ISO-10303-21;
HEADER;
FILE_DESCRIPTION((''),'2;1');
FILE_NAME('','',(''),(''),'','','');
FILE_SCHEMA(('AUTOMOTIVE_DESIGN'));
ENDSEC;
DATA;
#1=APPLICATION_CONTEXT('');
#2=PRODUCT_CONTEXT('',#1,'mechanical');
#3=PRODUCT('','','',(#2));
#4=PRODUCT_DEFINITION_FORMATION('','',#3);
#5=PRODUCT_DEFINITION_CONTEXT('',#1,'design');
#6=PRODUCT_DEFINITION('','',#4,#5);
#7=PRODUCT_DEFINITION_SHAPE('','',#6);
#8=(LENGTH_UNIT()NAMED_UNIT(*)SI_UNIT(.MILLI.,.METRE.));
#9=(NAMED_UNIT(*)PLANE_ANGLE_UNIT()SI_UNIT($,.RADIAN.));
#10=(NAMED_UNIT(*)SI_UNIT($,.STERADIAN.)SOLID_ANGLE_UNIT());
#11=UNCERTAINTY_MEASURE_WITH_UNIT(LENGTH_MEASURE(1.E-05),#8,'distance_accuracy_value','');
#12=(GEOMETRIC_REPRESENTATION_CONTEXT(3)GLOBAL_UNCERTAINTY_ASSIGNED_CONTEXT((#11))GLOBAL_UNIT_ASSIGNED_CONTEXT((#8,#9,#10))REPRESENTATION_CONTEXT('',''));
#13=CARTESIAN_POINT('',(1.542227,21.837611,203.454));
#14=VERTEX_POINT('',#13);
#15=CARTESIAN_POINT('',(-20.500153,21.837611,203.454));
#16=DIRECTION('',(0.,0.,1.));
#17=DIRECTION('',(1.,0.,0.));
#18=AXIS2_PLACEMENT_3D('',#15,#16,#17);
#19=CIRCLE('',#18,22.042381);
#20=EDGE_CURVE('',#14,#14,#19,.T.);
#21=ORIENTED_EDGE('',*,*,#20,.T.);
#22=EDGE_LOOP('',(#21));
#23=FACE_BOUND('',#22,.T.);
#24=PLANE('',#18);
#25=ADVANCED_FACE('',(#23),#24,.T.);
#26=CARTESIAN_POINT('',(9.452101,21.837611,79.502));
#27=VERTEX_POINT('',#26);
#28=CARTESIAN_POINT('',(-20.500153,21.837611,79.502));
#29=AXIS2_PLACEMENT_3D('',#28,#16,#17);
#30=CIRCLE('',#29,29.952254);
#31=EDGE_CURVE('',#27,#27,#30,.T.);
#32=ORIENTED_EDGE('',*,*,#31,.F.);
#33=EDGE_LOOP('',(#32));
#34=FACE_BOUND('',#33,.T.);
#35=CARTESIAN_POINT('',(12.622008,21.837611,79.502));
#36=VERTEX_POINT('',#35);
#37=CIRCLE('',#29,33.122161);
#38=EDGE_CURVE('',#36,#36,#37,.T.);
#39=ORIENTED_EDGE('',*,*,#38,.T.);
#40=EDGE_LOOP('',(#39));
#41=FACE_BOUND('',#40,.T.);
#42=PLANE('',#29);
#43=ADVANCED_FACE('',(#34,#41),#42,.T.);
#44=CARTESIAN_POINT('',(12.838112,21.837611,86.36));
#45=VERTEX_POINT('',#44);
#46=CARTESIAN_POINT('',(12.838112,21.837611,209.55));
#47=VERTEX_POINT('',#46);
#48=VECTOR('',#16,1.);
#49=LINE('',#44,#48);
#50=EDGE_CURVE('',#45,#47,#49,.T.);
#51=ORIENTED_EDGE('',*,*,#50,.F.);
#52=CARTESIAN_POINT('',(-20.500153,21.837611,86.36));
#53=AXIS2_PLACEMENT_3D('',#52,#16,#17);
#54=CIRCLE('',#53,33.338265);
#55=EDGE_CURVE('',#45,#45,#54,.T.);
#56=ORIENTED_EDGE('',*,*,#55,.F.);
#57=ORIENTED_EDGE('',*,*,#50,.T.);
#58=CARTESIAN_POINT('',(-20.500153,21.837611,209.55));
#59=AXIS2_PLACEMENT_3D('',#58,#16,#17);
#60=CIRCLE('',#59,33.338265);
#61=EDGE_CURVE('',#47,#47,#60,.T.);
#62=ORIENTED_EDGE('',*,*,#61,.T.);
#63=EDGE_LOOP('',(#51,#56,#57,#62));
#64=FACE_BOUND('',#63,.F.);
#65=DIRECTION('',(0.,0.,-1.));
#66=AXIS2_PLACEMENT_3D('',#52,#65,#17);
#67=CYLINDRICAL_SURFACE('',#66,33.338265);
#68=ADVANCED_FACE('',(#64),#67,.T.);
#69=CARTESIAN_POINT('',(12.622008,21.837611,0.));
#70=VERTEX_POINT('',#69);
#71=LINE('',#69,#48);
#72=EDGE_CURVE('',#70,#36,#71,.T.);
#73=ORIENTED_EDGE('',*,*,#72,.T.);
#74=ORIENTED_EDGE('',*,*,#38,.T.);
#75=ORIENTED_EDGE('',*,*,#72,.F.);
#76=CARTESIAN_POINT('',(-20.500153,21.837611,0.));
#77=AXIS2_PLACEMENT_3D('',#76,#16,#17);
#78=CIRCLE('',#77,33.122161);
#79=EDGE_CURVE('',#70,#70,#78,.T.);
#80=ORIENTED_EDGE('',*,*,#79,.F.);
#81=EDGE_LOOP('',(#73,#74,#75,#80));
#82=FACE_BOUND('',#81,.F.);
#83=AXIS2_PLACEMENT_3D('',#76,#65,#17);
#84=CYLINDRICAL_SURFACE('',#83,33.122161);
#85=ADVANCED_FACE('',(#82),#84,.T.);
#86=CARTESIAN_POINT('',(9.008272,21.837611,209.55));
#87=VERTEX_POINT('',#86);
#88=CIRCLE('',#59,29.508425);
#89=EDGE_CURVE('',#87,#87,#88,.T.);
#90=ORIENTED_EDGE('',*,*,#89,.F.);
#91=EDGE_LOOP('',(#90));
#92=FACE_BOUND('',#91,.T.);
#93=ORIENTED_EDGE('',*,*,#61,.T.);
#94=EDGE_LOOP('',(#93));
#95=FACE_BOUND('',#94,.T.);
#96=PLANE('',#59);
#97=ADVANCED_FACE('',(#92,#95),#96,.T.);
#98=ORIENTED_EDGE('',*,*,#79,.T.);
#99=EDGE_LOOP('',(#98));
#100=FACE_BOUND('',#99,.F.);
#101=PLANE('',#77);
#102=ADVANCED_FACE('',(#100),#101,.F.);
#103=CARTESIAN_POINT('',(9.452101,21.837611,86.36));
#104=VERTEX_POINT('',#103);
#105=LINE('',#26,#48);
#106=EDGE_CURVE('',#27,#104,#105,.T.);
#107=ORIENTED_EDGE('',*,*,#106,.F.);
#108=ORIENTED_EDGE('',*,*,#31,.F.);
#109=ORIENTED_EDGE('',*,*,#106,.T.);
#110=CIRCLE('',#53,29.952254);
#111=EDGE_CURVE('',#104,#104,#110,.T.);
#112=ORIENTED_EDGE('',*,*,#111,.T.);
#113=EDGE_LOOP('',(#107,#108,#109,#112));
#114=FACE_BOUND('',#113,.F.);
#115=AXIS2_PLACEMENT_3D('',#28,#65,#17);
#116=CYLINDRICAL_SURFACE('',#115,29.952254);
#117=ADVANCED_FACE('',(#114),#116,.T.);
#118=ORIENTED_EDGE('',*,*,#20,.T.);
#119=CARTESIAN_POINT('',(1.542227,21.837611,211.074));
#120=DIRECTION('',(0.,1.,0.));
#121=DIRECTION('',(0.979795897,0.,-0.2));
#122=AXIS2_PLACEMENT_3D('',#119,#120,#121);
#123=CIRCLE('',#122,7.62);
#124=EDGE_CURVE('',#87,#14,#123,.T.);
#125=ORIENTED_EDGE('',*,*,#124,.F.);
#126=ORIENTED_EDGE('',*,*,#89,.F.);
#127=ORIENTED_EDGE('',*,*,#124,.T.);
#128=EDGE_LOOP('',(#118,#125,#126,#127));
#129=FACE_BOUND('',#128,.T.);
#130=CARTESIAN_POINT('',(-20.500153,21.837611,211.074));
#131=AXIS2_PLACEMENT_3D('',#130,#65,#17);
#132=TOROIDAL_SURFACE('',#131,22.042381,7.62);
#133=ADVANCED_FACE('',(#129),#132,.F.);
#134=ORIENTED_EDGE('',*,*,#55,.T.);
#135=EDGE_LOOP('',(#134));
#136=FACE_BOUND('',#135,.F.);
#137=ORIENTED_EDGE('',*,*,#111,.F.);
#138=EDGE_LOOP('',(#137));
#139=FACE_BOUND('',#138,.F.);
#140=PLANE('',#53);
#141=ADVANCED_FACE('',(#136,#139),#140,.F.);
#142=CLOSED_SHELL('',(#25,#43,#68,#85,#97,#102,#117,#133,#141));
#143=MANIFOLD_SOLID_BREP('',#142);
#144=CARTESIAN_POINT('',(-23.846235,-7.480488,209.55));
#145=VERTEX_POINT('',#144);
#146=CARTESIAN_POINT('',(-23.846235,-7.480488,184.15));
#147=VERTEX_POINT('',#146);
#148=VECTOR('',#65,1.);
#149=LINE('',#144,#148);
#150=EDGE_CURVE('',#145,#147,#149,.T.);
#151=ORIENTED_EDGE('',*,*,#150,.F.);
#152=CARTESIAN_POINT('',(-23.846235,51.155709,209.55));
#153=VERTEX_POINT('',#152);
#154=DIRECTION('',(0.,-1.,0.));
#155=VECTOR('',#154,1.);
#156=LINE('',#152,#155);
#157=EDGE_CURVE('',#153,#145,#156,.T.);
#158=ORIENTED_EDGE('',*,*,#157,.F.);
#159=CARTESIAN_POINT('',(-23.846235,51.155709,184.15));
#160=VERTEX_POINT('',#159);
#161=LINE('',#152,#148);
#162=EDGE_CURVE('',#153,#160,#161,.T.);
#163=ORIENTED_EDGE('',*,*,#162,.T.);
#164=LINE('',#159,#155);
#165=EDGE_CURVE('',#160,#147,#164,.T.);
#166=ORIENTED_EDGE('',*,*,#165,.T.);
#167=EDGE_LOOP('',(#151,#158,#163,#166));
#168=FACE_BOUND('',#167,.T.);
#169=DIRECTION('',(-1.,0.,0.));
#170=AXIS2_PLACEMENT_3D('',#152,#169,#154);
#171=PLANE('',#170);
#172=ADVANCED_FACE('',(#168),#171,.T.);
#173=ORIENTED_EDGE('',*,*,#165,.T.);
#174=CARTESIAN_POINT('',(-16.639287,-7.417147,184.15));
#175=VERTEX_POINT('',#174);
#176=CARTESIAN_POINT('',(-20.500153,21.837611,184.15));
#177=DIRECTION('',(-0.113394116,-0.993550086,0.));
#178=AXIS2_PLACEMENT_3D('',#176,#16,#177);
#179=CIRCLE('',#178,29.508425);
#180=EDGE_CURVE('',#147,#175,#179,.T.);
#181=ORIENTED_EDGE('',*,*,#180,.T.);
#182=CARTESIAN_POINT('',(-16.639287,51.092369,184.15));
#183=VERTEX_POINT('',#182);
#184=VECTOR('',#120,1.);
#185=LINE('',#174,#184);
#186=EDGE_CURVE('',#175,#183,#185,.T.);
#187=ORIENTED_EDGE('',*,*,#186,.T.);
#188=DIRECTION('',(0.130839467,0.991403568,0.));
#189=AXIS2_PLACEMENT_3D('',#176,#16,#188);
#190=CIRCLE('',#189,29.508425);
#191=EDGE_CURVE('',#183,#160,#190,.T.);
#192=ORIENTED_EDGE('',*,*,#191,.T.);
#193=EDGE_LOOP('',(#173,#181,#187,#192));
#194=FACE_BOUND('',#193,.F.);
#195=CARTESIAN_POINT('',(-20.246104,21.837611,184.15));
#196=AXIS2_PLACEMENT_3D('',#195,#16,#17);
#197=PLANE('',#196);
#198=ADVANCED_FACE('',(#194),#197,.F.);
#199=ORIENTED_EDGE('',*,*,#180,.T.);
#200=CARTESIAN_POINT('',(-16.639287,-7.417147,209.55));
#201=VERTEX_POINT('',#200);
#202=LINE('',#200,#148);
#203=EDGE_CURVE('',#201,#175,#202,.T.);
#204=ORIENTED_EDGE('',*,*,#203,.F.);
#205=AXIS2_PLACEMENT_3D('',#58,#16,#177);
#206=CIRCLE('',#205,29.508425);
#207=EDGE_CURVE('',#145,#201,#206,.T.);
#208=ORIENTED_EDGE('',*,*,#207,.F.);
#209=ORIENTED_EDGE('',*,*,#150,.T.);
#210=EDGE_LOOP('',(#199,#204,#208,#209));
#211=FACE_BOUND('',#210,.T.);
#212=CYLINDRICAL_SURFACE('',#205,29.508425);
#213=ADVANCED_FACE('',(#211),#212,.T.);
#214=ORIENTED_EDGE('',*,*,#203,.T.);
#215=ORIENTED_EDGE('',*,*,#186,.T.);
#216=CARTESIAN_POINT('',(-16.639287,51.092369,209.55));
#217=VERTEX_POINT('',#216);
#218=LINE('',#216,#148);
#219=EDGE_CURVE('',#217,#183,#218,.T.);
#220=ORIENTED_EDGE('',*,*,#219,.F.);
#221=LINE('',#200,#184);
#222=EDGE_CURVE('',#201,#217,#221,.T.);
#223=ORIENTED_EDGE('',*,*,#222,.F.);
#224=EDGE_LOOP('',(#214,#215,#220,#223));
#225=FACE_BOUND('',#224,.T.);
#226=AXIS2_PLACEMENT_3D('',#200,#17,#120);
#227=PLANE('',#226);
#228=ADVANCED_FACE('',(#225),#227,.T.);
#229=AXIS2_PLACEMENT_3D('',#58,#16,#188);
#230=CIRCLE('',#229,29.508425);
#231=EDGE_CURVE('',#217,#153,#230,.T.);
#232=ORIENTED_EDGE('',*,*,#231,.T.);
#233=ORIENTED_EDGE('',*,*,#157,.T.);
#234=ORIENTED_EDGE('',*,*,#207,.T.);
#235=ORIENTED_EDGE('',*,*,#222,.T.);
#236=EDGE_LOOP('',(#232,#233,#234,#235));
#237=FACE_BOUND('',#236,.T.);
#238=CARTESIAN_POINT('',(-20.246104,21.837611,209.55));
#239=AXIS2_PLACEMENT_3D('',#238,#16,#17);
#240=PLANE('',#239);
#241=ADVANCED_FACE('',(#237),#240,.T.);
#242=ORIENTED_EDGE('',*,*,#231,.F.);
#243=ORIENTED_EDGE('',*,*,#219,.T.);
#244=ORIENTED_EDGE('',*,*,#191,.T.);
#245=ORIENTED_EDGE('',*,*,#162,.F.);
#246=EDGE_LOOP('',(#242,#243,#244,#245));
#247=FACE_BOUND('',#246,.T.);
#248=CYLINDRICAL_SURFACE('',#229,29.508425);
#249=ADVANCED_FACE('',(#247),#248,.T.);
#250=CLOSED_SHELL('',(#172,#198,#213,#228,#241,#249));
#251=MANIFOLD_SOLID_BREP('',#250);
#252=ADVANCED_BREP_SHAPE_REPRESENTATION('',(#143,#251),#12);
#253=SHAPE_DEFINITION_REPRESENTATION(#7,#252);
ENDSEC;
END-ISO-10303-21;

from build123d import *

# Parameters (mm, degrees)
F0_R      = 33.1221613945
F1_DEPTH  = 79.502
F2_R      = 29.9522541519
F3_DEPTH  = 6.858
F4_R      = 33.3382653076
F4_R_2    = 29.9522541519
F5_DEPTH  = 123.19
F6_R      = 29.5084253816
F7_DEPTH  = 6.096
F10_DEPTH = 25.4


# Not quite as in the source:
# - a fillet or chamfer that OpenCascade refuses, or shapes differently, is made with other operations: its cross-section is extruded or revolved along the edge and cut away or added


with BuildPart() as f1:
    # F0 (on Top) → F1 (new body)
    with BuildSketch(Plane.XY):
        with Locations((-20.5001533031, 21.8376107514)):
            Circle(F0_R)
    extrude(amount=F1_DEPTH)

    # F2 (on face) → F3 (join)
    with BuildSketch(Plane.XY.offset(79.502)):
        with Locations((-20.5001533031, 21.8376107514)):
            Circle(F2_R)
    extrude(amount=F3_DEPTH)

    # F4 (on face) → F5 (join)
    with BuildSketch(Plane.XY.offset(86.36)):
        with Locations((-20.5001533031, 21.8376107514)):
            Circle(F4_R)
        with Locations((-20.5001533031, 21.8376107514)):
            Circle(F4_R_2, mode=Mode.SUBTRACT)
        with Locations((-20.5001533031, 21.8376107514)):
            Circle(F4_R_2)
    extrude(amount=F5_DEPTH)

    # F6 (on face) → F7 (cut)
    with BuildSketch(Plane.XY.offset(209.55)):
        with Locations((-20.5001533031, 21.8376107514)):
            Circle(F6_R)
    extrude(amount=-F7_DEPTH, mode=Mode.SUBTRACT)

    # F8: fillet of radius 7.62 on 1 edges, made by hand

    # F8_s1 → F8_t2 (revolve)
    with BuildSketch(Plane.XZ.offset(-21.8376107514)):
        with BuildLine():
            ThreePointArc((9.0082720785, 209.55), (6.3615384966, 205.1715733804), (1.5422273425, 203.454))
            Line((1.5422273425, 203.454), (9.0082720785, 203.454))
            Line((9.0082720785, 203.454), (9.0082720785, 209.55))
        make_face()
    revolve(axis=Axis((-20.5001533031, 21.8376107514, 203.454), (0, 0, 1)))


with BuildPart() as f10:
    # F9 (on face) → F10 (new body)
    with BuildSketch(Plane.XY.offset(209.55)):
        with BuildLine():
            ThreePointArc((-16.6392866522, 51.0923689491), (-20.2408198189, 51.3448965406), (-23.8462351263, 51.1557093415))
            Line((-23.8462351263, 51.1557093415), (-23.8462351263, -7.4804878387))
            ThreePointArc((-23.8462351263, -7.4804878387), (-20.2408198189, -7.6696750378), (-16.6392866522, -7.4171474463))
            Line((-16.6392866522, -7.4171474463), (-16.6392866522, 51.0923689491))
        make_face()
    extrude(amount=-F10_DEPTH)


solid = Compound([f1.part, f10.part])
